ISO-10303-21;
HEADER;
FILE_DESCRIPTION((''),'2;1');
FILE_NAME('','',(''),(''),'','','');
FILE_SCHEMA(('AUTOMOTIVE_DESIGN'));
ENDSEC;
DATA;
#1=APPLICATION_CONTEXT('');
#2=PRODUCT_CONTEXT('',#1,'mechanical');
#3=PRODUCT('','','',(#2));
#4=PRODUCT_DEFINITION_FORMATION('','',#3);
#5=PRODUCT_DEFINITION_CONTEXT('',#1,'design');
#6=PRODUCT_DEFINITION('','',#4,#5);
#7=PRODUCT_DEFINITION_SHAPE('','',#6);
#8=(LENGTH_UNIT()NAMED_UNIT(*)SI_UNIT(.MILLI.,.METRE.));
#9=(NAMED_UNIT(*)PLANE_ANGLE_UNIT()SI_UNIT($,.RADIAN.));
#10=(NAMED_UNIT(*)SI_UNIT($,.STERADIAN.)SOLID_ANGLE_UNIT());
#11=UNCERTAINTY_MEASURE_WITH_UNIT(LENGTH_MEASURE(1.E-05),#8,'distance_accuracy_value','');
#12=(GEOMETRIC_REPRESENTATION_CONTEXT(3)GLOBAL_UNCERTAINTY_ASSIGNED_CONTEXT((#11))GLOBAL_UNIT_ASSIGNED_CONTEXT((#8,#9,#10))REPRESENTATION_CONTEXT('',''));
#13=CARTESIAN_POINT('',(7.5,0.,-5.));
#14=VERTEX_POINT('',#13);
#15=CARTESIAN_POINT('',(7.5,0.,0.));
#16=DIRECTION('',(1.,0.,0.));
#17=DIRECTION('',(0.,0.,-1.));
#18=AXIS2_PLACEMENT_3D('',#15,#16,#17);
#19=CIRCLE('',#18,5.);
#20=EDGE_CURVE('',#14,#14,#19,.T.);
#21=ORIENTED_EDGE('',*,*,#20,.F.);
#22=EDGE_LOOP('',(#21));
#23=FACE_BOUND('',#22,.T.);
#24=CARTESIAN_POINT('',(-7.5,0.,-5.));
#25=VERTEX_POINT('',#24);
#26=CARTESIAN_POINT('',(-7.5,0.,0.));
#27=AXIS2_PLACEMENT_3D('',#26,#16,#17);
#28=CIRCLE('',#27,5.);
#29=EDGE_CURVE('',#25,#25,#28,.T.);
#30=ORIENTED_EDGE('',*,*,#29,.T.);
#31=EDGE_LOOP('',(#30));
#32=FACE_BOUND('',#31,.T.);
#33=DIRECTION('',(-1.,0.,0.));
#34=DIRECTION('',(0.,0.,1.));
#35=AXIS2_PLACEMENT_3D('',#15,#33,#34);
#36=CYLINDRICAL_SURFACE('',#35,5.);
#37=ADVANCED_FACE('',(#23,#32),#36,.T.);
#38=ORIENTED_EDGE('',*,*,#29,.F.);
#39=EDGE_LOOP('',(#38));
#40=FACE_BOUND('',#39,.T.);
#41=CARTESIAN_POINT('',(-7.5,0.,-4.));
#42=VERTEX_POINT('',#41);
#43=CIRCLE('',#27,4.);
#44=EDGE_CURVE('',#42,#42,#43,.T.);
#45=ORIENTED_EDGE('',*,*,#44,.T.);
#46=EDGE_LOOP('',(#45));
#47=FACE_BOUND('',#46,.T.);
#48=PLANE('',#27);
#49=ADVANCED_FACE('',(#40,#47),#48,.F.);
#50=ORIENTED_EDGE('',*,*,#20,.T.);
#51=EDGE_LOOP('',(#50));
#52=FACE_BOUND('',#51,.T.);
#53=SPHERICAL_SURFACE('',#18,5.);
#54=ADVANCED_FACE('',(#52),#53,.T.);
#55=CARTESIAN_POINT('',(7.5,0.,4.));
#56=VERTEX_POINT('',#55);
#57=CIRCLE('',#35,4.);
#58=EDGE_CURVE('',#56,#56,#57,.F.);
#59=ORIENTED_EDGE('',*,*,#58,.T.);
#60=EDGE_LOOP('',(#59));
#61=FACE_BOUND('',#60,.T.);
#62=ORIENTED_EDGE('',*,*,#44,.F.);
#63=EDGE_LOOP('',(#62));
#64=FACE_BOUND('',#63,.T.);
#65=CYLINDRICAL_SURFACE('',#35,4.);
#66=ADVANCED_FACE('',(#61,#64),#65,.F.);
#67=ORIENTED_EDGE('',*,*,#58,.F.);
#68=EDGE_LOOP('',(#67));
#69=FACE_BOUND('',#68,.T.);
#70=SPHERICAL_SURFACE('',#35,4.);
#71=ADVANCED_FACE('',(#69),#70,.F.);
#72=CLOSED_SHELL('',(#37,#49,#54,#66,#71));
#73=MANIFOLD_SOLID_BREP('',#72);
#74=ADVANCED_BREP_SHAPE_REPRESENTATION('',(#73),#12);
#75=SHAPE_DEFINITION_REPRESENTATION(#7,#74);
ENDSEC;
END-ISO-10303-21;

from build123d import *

# Parameters (mm, degrees)
SKETCH1_R           = 5
BOSS_EXTRUDE1_DEPTH = 7.5
DOME1_FACE_RADIUS   = 5
DOME1_HEIGHT        = 5


# Read off the part's stored shape, not the designer's step: Shell1
with BuildPart() as part:
    # Sketch1 → Boss-Extrude1 (new, symmetric)
    with BuildSketch(Plane(origin=(0, 0, 0), x_dir=(0, 0, -1), z_dir=(1, 0, 0))):
        Circle(SKETCH1_R)
    extrude(amount=BOSS_EXTRUDE1_DEPTH, both=True)

    # Dome1: a dome of height H over a round flat face of radius A is a cap of a sphere of radius (A * A + H * H) / (2 * H)
    dome1_r = (DOME1_FACE_RADIUS * DOME1_FACE_RADIUS + DOME1_HEIGHT * DOME1_HEIGHT) / (2 * DOME1_HEIGHT)
    dome1_base = Plane((7.5, 0, 0), z_dir=(1, 0, 0))
    with Locations(dome1_base.offset(DOME1_HEIGHT - dome1_r)):
        dome1_ball = Sphere(dome1_r, mode=Mode.PRIVATE)
    add(split(dome1_ball, bisect_by=dome1_base, keep=Keep.TOP, mode=Mode.PRIVATE))

    # Shell1 outline → Shell1 (revolve, cut)
    with BuildSketch(Plane.YX):
        with BuildLine():
            Line((4, -7.5), (4, 7.499999996))
            ThreePointArc((4, 7.499999996), (2.828427126, 10.328427123), (0, 11.5))
            Line((0, 11.5), (0, -7.5))
            Line((0, -7.5), (4, -7.5))
        make_face()
    revolve(axis=Axis((0, 0, 0), (1, 0, 0)), mode=Mode.SUBTRACT)


solid = part.part
